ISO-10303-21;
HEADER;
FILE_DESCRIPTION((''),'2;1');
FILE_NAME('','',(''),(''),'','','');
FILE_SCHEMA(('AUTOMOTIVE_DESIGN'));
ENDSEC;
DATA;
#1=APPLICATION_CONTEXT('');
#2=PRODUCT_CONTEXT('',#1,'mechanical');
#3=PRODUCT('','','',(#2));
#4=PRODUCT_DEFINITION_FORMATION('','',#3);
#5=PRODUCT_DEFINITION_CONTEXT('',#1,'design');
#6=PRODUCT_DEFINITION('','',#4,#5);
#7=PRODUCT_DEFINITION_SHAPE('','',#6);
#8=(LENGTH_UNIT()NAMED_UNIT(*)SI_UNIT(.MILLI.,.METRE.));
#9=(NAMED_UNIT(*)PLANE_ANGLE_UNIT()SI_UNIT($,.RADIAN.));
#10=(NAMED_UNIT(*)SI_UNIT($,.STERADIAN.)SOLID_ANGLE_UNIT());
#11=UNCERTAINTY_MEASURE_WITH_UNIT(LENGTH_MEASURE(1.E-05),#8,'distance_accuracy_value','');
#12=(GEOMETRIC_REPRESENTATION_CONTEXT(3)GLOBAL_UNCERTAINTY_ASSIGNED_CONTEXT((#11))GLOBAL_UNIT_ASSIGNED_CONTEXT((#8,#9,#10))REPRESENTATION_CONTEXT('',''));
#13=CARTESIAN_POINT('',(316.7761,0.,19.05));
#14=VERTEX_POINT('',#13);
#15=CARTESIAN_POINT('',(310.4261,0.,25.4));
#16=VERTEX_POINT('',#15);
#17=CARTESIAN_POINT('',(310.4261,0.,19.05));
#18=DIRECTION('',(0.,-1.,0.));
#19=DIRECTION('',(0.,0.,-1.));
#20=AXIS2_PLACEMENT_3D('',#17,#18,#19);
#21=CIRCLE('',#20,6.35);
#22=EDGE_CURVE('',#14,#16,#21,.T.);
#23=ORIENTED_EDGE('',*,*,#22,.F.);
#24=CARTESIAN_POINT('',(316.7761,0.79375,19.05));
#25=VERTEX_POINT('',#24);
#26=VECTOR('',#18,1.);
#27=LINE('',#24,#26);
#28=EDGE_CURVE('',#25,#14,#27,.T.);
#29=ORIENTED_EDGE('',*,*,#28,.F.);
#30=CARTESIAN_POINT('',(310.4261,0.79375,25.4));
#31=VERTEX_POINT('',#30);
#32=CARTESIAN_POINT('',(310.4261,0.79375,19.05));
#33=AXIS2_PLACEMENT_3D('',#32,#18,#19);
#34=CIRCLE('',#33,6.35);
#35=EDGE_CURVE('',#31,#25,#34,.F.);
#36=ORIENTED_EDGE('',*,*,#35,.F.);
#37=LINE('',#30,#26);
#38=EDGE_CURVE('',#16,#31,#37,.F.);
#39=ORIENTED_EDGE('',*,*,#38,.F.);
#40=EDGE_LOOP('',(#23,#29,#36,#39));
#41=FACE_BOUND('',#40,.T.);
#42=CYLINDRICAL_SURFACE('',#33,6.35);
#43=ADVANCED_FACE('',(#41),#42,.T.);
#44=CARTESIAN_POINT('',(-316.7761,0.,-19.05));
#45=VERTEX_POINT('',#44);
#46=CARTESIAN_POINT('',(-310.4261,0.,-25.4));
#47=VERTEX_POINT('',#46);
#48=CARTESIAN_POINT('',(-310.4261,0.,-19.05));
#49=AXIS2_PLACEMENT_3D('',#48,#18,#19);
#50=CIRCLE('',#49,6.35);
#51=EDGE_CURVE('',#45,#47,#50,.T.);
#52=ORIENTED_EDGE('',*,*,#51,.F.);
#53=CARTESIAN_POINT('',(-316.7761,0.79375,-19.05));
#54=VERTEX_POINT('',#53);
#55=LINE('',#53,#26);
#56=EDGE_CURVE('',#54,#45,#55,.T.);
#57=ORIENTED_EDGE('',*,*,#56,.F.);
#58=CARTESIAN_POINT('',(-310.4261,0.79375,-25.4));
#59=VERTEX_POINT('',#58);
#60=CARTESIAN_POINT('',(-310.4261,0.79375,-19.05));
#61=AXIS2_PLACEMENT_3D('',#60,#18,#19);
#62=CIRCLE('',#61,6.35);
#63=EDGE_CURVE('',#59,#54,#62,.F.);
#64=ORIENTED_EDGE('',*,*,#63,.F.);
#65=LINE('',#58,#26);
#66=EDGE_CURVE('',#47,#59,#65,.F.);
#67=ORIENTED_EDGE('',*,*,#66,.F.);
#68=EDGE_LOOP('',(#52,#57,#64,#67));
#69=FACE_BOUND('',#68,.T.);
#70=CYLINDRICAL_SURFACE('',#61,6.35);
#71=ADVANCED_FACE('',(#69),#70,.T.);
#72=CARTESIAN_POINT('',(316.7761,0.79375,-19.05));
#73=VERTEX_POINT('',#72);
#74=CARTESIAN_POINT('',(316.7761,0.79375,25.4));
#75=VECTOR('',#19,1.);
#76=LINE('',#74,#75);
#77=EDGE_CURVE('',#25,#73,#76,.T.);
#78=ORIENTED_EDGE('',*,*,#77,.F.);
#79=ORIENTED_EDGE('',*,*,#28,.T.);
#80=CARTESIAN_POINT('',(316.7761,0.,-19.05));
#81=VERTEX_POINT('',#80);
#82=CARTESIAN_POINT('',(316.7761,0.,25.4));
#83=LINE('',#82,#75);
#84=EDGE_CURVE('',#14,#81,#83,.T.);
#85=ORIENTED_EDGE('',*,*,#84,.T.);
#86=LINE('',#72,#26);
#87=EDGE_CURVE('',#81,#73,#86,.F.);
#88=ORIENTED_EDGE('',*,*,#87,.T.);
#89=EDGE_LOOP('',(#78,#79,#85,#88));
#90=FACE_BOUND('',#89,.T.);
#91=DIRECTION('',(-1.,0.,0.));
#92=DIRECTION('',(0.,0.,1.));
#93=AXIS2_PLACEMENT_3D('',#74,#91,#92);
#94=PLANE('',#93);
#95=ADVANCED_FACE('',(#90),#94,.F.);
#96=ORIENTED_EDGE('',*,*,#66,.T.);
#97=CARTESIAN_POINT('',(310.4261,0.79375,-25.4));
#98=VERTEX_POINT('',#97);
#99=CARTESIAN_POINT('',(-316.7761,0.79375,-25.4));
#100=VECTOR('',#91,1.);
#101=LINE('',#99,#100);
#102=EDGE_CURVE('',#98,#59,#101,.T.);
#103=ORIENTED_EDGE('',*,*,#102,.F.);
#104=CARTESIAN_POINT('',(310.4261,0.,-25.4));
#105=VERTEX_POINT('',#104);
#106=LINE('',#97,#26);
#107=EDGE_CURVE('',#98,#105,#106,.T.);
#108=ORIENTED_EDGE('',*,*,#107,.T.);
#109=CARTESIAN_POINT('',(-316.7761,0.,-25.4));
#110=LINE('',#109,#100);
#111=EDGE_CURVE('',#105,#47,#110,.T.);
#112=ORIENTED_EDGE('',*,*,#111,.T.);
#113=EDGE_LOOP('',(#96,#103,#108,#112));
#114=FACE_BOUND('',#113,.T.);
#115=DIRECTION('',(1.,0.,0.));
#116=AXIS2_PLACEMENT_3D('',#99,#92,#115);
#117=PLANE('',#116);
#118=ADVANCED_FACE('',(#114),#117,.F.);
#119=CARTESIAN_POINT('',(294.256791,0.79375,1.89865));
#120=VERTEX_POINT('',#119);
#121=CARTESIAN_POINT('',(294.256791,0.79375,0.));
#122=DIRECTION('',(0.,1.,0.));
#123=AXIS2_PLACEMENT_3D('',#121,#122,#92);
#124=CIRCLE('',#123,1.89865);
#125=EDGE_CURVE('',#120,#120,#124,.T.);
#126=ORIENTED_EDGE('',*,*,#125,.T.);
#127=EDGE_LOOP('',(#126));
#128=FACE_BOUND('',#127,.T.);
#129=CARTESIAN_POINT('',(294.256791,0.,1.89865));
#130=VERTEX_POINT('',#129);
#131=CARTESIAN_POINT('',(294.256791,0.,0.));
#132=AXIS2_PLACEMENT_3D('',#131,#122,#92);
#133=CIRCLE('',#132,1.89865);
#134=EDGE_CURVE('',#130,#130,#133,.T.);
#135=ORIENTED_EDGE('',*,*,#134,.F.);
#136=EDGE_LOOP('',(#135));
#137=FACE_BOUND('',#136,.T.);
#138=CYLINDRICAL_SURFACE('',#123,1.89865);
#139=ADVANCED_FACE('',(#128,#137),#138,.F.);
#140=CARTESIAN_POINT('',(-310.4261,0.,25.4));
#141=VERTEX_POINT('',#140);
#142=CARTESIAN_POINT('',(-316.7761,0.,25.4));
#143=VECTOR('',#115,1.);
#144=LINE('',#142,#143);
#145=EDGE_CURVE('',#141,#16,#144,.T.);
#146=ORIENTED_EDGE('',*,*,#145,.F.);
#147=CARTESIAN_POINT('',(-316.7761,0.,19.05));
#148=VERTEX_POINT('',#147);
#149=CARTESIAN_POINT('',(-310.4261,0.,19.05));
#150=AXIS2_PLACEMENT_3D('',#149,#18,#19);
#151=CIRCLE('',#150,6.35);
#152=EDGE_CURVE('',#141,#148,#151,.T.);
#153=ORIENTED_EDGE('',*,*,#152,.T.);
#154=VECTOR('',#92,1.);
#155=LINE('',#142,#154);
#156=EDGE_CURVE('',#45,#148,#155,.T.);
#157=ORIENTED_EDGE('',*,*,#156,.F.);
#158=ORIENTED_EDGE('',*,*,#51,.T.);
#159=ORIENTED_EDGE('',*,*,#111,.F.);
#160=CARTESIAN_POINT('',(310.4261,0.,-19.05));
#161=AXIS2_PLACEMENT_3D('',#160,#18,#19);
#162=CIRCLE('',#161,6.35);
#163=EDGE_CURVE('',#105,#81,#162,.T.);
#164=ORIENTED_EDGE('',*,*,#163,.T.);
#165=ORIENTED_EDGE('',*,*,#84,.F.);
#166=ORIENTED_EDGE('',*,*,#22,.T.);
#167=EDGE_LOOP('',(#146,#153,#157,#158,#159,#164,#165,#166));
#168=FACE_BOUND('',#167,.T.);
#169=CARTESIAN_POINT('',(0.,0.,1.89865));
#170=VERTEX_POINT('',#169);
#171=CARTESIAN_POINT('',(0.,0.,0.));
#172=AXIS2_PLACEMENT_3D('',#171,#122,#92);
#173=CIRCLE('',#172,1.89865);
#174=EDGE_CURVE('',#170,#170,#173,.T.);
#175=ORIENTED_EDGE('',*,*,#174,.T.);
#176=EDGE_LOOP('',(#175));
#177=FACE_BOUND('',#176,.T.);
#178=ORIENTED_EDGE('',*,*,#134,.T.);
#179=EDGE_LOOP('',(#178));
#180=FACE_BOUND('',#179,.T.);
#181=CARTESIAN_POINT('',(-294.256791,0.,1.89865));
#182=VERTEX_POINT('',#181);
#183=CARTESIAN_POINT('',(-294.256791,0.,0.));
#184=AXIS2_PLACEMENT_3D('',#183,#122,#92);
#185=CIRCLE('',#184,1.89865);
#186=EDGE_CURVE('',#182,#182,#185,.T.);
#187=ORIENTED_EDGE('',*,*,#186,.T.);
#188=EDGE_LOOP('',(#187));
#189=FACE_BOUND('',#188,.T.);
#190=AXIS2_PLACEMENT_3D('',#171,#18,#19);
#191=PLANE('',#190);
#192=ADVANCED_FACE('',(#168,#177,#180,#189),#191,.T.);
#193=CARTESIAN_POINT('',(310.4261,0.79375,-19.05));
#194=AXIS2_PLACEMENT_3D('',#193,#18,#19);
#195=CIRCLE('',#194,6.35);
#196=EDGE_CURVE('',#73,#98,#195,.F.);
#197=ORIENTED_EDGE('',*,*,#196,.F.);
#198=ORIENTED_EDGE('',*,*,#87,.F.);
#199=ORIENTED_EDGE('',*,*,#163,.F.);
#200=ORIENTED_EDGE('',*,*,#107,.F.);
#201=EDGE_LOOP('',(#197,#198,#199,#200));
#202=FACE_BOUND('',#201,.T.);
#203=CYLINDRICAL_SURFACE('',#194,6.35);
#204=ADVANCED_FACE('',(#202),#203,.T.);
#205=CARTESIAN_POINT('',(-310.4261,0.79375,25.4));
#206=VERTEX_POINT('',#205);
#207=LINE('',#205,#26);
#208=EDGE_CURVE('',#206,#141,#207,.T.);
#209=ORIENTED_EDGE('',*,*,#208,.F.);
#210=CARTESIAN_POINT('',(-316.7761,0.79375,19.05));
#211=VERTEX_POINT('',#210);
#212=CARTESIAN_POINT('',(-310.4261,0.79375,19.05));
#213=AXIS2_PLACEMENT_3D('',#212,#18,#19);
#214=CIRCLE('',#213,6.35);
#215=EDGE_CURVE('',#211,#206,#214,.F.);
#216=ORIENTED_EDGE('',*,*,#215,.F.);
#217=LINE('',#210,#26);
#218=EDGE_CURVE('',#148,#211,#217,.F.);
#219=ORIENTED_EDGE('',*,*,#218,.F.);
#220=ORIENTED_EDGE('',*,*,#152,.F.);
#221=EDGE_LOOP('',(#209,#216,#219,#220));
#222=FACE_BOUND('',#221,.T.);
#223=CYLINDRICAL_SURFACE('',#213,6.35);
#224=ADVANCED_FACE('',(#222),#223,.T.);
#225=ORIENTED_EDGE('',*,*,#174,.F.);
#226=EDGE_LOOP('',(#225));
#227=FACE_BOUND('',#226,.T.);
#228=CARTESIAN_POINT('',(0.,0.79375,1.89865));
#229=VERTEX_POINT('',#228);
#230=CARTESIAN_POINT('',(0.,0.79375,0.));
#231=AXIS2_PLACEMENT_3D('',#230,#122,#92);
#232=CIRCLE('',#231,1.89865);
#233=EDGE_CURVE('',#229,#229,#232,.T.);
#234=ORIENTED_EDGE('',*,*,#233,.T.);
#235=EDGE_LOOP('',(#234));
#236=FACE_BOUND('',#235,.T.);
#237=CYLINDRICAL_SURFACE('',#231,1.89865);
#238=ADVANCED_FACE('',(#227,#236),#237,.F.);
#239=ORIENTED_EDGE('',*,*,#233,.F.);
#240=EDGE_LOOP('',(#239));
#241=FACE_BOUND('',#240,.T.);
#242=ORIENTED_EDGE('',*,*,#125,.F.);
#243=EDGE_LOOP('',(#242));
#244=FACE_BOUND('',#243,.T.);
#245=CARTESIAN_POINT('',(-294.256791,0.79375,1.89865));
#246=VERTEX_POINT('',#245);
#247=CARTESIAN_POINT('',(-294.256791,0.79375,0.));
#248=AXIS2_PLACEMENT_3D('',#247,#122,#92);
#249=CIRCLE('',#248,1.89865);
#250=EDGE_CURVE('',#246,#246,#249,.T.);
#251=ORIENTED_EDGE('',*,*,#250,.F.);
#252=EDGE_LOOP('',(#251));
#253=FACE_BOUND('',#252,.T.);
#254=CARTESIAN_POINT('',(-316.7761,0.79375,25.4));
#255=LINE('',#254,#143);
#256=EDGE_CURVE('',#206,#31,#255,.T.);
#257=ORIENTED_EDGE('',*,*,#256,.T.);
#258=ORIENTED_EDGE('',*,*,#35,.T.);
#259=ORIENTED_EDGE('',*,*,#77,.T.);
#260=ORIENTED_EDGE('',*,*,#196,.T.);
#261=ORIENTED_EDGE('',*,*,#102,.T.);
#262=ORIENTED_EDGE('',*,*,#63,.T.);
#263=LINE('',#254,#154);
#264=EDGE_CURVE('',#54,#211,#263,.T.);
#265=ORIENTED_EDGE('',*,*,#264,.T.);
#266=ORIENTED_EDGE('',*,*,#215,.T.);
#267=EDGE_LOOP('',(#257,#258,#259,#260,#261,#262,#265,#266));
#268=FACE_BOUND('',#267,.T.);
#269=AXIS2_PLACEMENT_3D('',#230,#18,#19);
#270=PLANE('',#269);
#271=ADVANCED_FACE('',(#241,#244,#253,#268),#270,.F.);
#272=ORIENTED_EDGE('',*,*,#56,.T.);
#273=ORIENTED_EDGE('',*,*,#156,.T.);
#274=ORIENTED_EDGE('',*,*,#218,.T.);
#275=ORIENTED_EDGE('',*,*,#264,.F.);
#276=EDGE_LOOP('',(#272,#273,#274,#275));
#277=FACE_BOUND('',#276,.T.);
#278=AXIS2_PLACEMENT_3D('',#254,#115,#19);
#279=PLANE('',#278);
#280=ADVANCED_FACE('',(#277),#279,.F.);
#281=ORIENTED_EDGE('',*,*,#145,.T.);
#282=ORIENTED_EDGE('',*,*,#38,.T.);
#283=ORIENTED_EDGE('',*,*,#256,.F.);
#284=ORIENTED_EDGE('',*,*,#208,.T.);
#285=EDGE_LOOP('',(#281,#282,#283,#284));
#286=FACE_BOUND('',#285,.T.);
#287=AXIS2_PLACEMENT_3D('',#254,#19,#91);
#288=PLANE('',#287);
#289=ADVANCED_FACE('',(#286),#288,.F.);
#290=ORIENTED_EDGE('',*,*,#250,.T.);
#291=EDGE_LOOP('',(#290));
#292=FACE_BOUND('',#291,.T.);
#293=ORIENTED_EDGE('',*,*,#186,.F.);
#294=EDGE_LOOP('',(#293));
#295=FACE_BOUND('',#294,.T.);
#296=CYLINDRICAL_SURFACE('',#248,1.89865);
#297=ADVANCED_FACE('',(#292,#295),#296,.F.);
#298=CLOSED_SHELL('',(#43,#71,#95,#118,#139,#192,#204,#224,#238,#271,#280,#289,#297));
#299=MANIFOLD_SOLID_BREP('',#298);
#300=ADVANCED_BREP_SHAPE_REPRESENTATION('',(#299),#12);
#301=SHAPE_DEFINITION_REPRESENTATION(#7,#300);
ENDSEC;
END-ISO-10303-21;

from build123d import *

# Parameters (mm, degrees)
SKETCH1_W             = 633.5522
SKETCH1_H             = 50.8
BOSS_EXTRUDE1_DEPTH   = 0.79375
FILLET1_R             = 6.35
F_6_CLEARANCE_HOLE1_D = 3.7973


with BuildPart() as part:
    # Sketch1 → Boss-Extrude1 (new body)
    with BuildSketch(Plane(origin=(0, 0, 0), x_dir=(1, 0, 0), z_dir=(0, 1, 0))):
        Rectangle(SKETCH1_W, SKETCH1_H)
    extrude(amount=BOSS_EXTRUDE1_DEPTH)

    # Fillet1
    fillet1_edges = [part.edges().sort_by_distance(p)[0] for p in [
        (316.7761, 0.396875, 25.4),
        (-316.7761, 0.396875, 25.4),
        (-316.7761, 0.396875, -25.4),
        (316.7761, 0.396875, -25.4),
    ]]
    fillet(fillet1_edges, radius=FILLET1_R)

    # #6 Clearance Hole1 (through all)
    with Locations(Plane(origin=(0, 0.79375, 0), x_dir=(1, 0, 0), z_dir=(0, 1, 0))):
        with Locations((294.256791216, 0), (0, 0), (-294.256791216, 0)):
            Hole(F_6_CLEARANCE_HOLE1_D / 2)


solid = part.part
